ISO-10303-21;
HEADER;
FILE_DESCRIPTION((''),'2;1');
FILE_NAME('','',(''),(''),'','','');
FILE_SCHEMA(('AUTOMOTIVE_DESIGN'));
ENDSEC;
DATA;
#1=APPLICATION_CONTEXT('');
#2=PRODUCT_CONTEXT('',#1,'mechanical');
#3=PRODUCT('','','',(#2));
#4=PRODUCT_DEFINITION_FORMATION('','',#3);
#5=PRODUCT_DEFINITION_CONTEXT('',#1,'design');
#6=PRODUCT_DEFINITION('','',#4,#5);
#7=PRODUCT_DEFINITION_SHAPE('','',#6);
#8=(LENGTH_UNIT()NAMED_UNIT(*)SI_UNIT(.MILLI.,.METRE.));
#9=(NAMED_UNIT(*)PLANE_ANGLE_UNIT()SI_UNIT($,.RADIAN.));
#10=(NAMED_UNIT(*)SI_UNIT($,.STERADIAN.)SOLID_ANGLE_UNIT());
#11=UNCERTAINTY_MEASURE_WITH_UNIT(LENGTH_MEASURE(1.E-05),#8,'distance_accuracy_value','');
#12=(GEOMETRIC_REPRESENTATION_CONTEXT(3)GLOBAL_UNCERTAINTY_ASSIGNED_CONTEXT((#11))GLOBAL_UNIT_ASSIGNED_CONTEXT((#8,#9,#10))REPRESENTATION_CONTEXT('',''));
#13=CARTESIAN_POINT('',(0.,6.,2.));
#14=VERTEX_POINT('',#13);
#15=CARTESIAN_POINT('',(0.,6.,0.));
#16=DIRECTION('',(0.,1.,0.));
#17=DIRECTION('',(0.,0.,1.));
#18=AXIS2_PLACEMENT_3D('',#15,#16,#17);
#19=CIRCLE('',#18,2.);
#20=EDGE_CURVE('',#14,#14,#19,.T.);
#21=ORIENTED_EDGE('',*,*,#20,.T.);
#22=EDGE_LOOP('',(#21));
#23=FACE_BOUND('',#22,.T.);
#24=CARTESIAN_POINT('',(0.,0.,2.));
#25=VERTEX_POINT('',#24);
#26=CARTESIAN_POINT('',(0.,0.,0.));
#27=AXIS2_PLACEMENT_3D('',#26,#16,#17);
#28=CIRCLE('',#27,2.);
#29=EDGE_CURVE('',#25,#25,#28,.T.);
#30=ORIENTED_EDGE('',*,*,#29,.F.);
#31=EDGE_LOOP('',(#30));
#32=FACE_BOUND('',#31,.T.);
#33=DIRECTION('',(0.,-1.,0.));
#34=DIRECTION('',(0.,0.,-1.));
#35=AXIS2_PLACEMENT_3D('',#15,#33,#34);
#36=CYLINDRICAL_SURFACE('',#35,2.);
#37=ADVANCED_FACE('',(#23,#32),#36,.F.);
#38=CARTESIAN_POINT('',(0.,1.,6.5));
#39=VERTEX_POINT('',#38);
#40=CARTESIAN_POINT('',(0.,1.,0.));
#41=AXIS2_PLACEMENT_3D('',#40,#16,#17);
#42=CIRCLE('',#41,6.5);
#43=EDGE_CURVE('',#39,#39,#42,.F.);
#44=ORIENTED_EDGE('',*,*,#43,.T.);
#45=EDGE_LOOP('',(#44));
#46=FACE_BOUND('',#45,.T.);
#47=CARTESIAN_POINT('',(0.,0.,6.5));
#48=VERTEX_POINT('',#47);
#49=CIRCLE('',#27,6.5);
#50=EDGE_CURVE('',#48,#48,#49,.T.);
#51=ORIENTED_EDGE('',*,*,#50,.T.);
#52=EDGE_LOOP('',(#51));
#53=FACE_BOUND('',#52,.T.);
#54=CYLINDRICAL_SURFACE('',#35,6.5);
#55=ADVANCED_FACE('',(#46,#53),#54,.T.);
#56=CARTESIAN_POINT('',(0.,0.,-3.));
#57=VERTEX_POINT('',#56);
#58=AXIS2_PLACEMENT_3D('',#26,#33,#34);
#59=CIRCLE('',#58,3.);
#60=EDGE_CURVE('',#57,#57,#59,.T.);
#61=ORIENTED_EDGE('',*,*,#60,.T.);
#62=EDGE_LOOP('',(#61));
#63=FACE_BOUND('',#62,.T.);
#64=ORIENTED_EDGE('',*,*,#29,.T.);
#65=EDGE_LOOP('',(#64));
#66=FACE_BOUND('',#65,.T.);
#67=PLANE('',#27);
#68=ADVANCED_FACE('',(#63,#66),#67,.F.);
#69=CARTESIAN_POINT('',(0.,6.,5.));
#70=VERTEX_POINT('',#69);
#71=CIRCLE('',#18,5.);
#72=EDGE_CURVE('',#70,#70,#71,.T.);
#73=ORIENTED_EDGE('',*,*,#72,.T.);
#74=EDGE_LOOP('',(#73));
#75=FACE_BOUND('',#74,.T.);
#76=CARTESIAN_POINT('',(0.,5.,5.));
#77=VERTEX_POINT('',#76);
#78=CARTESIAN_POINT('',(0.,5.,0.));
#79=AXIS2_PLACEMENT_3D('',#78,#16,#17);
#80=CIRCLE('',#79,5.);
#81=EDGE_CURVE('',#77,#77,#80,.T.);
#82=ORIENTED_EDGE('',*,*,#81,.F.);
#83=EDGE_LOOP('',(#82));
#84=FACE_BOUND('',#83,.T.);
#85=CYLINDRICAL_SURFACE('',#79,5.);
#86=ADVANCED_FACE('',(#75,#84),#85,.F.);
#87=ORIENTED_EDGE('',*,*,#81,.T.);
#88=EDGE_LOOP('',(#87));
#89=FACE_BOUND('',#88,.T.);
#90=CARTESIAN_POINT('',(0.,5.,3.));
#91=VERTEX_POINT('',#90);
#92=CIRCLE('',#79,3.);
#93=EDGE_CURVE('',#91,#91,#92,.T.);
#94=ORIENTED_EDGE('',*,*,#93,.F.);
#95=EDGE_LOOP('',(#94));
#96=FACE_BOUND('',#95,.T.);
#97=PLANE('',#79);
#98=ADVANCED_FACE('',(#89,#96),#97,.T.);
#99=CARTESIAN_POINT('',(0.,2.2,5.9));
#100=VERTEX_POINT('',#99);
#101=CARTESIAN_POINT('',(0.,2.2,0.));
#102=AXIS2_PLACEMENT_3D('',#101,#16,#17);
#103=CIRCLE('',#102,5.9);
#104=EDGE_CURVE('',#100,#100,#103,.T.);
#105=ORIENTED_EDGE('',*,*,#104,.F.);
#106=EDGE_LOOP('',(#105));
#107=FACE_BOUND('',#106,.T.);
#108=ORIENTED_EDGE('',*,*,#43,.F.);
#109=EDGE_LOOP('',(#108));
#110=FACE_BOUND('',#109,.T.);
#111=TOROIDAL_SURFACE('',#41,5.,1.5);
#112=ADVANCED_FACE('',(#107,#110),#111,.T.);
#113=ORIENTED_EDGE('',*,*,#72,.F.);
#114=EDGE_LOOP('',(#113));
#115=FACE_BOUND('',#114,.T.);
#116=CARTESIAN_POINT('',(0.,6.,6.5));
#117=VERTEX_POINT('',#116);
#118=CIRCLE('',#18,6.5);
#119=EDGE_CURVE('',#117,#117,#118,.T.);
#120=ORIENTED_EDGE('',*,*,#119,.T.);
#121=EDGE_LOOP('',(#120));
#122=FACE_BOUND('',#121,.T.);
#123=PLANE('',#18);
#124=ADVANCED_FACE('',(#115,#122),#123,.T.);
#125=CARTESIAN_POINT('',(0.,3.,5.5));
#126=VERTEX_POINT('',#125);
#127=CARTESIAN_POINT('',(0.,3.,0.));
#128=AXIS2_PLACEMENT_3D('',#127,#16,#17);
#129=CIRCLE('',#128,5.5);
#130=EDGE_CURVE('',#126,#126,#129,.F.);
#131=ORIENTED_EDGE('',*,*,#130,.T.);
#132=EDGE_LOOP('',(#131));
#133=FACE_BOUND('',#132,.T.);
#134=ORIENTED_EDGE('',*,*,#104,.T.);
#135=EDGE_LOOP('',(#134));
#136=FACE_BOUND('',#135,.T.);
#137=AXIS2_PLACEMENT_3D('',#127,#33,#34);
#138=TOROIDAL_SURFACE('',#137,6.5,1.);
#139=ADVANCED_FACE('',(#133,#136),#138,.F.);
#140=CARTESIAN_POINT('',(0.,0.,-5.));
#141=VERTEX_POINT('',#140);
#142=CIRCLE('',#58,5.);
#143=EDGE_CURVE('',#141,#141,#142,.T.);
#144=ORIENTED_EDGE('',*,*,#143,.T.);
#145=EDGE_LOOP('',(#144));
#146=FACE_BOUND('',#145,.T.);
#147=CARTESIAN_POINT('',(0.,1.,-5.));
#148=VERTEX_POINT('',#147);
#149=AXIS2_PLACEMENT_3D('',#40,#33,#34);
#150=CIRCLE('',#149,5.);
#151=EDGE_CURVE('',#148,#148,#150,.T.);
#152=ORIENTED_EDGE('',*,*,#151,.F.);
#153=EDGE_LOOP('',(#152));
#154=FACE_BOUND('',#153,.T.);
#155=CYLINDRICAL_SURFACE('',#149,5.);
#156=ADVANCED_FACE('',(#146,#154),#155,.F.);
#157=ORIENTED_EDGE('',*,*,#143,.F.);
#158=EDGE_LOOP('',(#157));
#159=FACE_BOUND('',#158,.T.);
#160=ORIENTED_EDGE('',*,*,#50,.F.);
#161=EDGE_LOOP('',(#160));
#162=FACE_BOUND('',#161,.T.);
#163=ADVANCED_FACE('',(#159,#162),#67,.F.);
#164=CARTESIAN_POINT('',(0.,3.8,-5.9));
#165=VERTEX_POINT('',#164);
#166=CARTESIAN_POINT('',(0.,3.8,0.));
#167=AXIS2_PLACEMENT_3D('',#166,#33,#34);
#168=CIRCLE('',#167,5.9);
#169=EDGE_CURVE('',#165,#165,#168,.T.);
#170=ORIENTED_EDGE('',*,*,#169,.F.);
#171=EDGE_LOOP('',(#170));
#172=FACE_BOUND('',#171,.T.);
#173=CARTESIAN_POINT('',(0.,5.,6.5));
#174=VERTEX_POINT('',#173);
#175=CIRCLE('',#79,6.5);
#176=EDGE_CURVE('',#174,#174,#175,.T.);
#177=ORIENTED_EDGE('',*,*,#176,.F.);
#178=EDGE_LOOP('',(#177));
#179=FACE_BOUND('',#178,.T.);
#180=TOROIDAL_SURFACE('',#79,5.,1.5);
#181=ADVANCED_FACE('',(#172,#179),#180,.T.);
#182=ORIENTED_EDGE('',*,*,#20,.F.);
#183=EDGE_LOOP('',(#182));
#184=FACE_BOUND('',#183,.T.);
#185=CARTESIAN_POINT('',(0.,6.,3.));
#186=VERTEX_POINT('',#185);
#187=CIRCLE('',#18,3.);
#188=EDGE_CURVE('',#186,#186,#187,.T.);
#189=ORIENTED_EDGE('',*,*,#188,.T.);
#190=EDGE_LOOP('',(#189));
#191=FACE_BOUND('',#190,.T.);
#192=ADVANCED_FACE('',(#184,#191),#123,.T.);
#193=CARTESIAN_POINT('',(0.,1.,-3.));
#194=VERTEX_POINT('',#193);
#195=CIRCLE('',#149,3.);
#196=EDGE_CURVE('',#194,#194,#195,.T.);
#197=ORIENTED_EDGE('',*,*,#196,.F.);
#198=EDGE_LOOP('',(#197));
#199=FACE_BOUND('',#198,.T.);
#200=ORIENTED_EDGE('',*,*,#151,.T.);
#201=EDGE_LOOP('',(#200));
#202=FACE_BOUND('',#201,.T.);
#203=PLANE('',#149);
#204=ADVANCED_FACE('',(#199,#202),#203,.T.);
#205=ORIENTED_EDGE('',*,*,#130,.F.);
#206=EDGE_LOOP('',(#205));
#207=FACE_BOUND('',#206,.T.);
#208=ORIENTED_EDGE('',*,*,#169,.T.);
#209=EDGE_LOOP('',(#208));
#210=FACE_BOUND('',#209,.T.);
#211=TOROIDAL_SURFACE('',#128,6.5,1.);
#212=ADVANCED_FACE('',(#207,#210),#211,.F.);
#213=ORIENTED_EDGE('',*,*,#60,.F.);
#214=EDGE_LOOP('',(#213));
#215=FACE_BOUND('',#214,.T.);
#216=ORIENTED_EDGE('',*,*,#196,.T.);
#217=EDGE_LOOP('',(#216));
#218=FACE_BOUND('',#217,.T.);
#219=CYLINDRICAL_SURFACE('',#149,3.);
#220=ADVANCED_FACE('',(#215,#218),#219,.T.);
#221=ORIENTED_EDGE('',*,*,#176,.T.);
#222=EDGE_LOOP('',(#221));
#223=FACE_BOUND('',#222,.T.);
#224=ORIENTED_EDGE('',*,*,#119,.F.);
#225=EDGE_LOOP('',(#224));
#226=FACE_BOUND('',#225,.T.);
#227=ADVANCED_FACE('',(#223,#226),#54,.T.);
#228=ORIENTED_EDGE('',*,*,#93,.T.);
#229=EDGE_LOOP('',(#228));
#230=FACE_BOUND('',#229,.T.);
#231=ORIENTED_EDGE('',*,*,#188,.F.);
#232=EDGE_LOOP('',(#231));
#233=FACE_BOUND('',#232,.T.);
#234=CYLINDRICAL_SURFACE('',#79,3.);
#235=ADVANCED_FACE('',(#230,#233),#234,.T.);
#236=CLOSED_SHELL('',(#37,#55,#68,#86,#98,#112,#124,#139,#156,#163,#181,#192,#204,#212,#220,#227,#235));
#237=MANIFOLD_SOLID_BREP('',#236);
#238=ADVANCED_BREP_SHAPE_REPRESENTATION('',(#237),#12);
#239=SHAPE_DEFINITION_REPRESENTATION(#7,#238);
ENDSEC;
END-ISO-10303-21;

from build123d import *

# Parameters (mm, degrees)
SKETCH_1_R          = 6.5
SKETCH_1_R_2        = 2
EXTRUDE_1_DEPTH     = 6
SKETCH_2_R          = 5
SKETCH_2_R_2        = 3
CUT_EXTRUDE_1_DEPTH = 1
CUT_EXTRUDE_START   = -1
SKETCH_3_R          = 5
SKETCH_3_R_2        = 3
CUT_EXTRUDE_2_DEPTH = 1
SKETCH_4_W          = 1
SKETCH_4_H          = 2
FILLET_1_R          = 1
FILLET_2_R          = 1.5


with BuildPart() as part:
    # 草图1 → 凸台-拉伸1 (new body)
    with BuildSketch(Plane(origin=(0, 0, 0), x_dir=(1, 0, 0), z_dir=(0, 1, 0))):
        with Locations(Location((0, 0, 0), (0, 0, 270))):
            Circle(SKETCH_1_R)
        with Locations(Location((0, 0, 0), (0, 0, 270))):
            Circle(SKETCH_1_R_2, mode=Mode.SUBTRACT)
    extrude(amount=EXTRUDE_1_DEPTH)

    # 草图2 → 切除-拉伸1 (cut)
    with BuildSketch(Plane(origin=(0, 6, 0), x_dir=(1, 0, 0), z_dir=(0, 1, 0))):
        with Locations(Location((0, 0, 0), (0, 0, 270))):
            Circle(SKETCH_2_R)
        with Locations(Location((0, 0, 0), (0, 0, 270))):
            Circle(SKETCH_2_R_2, mode=Mode.SUBTRACT)
    extrude(amount=-CUT_EXTRUDE_1_DEPTH, mode=Mode.SUBTRACT)

    # 草图3 → 切除-拉伸2 (cut)
    with BuildSketch(Plane(origin=(0, 0, 0), x_dir=(-1, 0, 0), z_dir=(0, -1, 0)).offset(CUT_EXTRUDE_START)):
        with Locations(Location((0, 0, 0), (0, 0, 270))):
            Circle(SKETCH_3_R)
        with Locations(Location((0, 0, 0), (0, 0, 270))):
            Circle(SKETCH_3_R_2, mode=Mode.SUBTRACT)
    extrude(amount=CUT_EXTRUDE_2_DEPTH, mode=Mode.SUBTRACT)

    # 草图4 → 切除-旋转1 (revolve, cut)
    with BuildSketch(Plane.XY, mode=Mode.PRIVATE) as cut_revolve_1_sk:
        with Locations((6, 3)):
            Rectangle(SKETCH_4_W, SKETCH_4_H)
    revolve(cut_revolve_1_sk.sketch.rotate(Axis((0, 0, 0), (0, 1, 0)), 90), axis=Axis((0, 0, 0), (0, 1, 0)), mode=Mode.SUBTRACT)

    # 圆角1
    fillet_1_edges = [part.edges().sort_by_distance(p)[0] for p in [
        (0, 2, 5.5),
        (0, 4, 5.5),
    ]]
    fillet(fillet_1_edges, radius=FILLET_1_R - 0.0001)  # a hair under: the kernel refuses the full size

    # 圆角2
    fillet_2_edges = [part.edges().sort_by_distance(p)[0] for p in [
        (0, 4, -6.5),
        (0, 2, -6.5),
    ]]
    fillet(fillet_2_edges, radius=FILLET_2_R)


solid = part.part
